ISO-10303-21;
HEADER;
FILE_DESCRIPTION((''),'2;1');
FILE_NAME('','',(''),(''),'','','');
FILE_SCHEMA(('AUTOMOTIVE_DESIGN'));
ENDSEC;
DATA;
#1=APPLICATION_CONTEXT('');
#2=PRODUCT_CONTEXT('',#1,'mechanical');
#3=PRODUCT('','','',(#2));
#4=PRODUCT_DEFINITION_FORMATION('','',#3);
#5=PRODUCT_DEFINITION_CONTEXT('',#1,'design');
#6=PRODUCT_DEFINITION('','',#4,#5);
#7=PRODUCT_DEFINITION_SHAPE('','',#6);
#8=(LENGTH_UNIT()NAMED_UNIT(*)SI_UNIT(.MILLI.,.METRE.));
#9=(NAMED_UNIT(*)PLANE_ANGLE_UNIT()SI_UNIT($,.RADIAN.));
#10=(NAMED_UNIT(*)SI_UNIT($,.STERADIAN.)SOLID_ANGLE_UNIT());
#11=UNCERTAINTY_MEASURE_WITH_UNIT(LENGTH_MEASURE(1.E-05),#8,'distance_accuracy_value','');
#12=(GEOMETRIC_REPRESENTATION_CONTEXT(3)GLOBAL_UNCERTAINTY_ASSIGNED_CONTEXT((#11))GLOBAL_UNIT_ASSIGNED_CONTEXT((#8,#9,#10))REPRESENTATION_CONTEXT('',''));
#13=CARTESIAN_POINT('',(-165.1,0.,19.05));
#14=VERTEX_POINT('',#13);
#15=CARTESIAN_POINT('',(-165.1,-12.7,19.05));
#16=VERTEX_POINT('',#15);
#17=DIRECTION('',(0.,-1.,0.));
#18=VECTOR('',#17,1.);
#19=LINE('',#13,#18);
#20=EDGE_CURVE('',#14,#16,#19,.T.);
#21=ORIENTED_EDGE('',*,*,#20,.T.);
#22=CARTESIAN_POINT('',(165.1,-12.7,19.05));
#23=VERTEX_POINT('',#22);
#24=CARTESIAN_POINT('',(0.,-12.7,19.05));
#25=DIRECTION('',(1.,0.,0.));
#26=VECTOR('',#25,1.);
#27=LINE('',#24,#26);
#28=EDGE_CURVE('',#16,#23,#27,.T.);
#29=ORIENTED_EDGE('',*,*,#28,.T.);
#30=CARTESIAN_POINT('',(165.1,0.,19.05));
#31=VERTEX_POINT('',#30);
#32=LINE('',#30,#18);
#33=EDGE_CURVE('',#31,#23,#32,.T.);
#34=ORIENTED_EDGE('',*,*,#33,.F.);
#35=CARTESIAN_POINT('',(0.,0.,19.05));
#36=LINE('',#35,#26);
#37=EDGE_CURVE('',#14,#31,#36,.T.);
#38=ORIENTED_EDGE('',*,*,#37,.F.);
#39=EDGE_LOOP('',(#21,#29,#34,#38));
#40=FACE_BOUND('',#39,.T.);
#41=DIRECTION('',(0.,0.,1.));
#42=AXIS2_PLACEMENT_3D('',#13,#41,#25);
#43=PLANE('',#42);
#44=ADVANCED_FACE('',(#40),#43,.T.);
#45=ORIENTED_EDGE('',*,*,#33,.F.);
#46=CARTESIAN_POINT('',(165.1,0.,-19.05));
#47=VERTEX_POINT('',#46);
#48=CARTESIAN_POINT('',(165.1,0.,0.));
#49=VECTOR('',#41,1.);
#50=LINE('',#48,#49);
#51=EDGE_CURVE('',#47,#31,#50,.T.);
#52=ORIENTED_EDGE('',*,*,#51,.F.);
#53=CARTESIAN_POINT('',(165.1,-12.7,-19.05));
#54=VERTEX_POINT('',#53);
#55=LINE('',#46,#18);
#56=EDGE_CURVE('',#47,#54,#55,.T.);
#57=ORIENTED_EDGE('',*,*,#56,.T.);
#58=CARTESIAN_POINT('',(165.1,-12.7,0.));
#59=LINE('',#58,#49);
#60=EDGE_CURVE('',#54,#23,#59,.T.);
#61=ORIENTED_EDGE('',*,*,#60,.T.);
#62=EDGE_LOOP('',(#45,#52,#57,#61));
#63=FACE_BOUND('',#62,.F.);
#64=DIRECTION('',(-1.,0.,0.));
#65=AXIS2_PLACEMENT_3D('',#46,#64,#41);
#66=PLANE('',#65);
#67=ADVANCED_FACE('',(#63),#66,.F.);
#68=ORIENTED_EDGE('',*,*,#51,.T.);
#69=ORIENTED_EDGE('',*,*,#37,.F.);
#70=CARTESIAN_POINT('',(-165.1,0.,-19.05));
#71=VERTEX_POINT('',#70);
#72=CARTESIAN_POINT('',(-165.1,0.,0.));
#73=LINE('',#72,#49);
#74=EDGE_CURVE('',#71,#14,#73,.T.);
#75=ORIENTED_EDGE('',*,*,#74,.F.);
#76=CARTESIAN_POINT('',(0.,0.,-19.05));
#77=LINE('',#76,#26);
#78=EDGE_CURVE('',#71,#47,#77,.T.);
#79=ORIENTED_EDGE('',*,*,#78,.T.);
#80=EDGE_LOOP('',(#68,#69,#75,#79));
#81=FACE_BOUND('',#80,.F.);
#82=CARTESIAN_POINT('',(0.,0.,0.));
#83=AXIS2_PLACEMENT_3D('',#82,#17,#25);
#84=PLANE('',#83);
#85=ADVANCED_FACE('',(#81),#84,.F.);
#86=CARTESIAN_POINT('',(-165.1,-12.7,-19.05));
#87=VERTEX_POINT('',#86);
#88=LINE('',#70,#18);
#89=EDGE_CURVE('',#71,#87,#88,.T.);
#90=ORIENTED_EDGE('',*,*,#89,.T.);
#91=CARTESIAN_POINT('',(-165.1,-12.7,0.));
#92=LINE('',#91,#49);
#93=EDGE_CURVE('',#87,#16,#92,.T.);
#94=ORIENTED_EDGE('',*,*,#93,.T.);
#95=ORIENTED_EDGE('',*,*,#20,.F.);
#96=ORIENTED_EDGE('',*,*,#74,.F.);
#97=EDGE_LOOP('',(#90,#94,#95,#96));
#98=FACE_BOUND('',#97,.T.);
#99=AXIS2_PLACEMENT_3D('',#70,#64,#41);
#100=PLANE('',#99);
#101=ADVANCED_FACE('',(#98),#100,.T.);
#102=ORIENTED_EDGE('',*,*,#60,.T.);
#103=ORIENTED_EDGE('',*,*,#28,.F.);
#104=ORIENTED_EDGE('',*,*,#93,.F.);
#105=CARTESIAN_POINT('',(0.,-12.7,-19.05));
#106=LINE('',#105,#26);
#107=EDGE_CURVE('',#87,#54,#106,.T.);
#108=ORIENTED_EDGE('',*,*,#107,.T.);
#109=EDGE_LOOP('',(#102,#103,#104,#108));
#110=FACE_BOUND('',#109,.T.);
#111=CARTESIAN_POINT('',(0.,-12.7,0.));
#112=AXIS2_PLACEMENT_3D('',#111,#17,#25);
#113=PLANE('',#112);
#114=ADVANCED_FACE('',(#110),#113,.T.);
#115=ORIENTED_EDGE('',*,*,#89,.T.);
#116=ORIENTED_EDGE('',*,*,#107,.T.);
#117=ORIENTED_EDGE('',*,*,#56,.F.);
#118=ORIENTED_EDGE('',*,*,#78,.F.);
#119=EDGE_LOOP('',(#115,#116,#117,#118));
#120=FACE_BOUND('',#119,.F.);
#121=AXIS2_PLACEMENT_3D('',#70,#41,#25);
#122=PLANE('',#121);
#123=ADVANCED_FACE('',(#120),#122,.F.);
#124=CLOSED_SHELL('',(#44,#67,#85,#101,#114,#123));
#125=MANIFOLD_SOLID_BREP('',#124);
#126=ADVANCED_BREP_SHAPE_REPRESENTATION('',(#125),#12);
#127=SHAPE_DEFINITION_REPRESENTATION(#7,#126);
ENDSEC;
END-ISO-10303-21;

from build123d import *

# Parameters (mm, degrees)
F0_W     = 330.2
F0_H     = 38.1
F1_DEPTH = 12.7


# Not quite as in the source:
# - a feature names something its author has since deleted; it is built from what else it names


with BuildPart() as f1:
    # F0 (on Front) → F1 (new body)
    with BuildSketch(Plane.XZ):
        Rectangle(F0_W, F0_H)
    extrude(amount=F1_DEPTH)


solid = f1.part
